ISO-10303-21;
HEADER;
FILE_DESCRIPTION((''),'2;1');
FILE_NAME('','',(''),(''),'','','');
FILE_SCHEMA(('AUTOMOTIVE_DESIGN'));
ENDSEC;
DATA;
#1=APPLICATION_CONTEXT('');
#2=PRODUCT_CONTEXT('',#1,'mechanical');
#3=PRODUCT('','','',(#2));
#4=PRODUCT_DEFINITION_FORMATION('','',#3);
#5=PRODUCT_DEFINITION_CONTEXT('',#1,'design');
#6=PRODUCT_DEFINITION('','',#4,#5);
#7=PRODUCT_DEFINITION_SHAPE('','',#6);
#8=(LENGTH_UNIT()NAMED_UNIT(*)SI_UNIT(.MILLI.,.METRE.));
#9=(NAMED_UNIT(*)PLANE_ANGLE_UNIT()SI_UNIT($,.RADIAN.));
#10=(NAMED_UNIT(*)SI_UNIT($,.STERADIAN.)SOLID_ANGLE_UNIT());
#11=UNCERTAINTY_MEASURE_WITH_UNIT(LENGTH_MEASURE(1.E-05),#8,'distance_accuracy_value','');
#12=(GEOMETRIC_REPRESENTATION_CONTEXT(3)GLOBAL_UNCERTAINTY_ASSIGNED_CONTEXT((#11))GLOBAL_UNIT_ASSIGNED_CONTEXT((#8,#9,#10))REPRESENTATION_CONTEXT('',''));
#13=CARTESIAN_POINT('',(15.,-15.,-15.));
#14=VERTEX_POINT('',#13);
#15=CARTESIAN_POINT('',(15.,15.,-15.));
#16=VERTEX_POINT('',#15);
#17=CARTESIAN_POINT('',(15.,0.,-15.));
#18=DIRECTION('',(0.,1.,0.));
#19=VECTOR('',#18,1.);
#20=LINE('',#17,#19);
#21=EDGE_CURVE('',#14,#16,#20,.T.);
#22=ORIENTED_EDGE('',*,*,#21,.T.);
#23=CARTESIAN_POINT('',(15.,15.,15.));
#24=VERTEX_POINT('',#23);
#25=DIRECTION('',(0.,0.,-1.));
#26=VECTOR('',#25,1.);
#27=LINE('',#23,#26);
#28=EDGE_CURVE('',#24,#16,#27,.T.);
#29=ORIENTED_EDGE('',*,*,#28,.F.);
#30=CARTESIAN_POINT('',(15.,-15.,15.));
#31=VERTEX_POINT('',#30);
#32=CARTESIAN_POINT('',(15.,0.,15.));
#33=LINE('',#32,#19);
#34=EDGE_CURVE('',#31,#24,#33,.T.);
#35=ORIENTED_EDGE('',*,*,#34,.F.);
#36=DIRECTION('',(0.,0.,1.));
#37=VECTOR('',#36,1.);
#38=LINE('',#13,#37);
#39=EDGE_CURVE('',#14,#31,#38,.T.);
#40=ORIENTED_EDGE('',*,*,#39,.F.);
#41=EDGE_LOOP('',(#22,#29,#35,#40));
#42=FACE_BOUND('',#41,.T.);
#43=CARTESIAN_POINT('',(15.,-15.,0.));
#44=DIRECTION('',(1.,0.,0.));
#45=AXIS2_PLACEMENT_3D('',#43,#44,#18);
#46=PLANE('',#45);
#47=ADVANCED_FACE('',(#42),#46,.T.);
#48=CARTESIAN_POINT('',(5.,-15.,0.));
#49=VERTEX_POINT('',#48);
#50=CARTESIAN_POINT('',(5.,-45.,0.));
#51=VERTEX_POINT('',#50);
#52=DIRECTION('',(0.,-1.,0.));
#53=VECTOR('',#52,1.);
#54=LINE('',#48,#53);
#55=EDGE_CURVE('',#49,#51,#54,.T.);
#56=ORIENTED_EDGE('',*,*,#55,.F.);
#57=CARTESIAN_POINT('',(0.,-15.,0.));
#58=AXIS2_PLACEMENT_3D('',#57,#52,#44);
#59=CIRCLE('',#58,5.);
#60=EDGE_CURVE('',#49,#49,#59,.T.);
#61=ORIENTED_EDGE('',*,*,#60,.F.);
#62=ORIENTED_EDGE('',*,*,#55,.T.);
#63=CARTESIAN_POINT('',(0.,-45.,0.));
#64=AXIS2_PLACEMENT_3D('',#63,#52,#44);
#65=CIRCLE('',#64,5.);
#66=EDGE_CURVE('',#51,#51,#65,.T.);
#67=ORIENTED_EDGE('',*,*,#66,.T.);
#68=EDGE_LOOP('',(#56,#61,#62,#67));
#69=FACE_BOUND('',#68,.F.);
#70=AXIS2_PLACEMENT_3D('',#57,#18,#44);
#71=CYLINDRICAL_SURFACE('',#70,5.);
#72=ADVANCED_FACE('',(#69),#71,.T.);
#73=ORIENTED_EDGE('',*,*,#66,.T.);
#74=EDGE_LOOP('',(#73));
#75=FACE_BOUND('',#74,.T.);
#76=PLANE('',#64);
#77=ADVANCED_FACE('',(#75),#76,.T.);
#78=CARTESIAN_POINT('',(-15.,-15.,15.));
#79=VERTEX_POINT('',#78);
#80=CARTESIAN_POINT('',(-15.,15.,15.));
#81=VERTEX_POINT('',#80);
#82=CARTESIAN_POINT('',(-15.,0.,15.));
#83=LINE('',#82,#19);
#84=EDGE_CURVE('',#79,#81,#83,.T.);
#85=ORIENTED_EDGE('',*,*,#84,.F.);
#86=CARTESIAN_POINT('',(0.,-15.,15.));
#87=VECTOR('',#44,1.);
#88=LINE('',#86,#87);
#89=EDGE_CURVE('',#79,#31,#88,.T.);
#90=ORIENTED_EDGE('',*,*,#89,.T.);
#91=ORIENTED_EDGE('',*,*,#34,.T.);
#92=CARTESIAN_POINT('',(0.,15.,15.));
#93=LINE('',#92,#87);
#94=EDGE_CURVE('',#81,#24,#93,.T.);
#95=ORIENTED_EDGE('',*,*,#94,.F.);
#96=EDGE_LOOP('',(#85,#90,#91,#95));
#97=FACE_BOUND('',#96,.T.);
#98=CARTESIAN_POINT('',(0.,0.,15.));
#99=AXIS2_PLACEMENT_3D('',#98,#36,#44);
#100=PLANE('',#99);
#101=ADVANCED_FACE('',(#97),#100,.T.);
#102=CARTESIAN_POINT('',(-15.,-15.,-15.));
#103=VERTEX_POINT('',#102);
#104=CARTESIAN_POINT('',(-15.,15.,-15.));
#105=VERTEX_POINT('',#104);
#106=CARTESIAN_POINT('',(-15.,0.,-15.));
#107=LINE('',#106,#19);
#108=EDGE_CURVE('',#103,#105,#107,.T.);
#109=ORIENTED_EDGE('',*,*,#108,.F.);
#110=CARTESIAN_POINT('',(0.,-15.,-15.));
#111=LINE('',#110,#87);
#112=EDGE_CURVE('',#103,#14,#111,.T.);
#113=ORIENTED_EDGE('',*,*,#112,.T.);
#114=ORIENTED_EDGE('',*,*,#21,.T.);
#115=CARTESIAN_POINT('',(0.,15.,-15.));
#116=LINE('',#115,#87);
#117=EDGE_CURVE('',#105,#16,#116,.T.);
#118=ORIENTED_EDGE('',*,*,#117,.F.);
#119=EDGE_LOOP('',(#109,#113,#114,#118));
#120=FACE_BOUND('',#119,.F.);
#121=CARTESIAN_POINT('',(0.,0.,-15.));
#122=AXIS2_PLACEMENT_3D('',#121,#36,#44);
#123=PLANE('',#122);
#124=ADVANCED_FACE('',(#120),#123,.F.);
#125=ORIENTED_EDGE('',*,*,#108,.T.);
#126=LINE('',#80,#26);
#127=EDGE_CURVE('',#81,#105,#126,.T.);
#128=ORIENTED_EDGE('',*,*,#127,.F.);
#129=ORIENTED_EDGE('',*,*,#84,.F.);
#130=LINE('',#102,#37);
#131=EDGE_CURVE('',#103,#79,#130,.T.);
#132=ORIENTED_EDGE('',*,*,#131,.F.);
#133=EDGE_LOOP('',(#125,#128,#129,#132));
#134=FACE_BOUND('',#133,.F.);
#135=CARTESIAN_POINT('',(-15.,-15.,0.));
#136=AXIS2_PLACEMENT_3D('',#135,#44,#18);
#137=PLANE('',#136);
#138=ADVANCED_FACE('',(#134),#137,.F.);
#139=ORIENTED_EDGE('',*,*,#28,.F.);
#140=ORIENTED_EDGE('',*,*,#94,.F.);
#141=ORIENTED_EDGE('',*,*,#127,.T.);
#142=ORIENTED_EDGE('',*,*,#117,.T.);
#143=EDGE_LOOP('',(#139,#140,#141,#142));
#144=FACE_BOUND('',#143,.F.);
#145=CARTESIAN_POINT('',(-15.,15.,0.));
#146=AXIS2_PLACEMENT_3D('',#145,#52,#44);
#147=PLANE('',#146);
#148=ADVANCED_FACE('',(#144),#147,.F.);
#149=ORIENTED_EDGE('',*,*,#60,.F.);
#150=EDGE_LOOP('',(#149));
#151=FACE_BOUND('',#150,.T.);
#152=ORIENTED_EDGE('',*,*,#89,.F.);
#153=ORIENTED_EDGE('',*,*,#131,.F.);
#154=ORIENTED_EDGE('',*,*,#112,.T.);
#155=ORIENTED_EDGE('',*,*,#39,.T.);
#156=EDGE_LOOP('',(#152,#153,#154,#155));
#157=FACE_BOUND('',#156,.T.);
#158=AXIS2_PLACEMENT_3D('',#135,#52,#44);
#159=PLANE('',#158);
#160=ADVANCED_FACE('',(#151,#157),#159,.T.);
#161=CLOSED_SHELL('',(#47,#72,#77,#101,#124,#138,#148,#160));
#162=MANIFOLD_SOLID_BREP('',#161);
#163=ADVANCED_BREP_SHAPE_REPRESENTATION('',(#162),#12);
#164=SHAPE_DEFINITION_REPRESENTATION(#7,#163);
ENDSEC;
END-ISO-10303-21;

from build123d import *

# Parameters (mm, degrees)
F0_W     = 30
F0_H     = 30
F1_DEPTH = 15
F2_R     = 5
F3_DEPTH = 30


# Not quite as in the source:
# - a feature of the source that left no trace in its solid (it failed there, or was rolled back) is left out


with BuildPart() as f1:
    # F0 (on Top) → F1 (new body, symmetric)
    with BuildSketch(Plane.XY):
        Rectangle(F0_W, F0_H)
    extrude(amount=F1_DEPTH, both=True)

    # F2 (on face) → F3 (join)
    with BuildSketch(Plane.XZ.offset(15)):
        Circle(F2_R)
    extrude(amount=F3_DEPTH)


solid = f1.part
